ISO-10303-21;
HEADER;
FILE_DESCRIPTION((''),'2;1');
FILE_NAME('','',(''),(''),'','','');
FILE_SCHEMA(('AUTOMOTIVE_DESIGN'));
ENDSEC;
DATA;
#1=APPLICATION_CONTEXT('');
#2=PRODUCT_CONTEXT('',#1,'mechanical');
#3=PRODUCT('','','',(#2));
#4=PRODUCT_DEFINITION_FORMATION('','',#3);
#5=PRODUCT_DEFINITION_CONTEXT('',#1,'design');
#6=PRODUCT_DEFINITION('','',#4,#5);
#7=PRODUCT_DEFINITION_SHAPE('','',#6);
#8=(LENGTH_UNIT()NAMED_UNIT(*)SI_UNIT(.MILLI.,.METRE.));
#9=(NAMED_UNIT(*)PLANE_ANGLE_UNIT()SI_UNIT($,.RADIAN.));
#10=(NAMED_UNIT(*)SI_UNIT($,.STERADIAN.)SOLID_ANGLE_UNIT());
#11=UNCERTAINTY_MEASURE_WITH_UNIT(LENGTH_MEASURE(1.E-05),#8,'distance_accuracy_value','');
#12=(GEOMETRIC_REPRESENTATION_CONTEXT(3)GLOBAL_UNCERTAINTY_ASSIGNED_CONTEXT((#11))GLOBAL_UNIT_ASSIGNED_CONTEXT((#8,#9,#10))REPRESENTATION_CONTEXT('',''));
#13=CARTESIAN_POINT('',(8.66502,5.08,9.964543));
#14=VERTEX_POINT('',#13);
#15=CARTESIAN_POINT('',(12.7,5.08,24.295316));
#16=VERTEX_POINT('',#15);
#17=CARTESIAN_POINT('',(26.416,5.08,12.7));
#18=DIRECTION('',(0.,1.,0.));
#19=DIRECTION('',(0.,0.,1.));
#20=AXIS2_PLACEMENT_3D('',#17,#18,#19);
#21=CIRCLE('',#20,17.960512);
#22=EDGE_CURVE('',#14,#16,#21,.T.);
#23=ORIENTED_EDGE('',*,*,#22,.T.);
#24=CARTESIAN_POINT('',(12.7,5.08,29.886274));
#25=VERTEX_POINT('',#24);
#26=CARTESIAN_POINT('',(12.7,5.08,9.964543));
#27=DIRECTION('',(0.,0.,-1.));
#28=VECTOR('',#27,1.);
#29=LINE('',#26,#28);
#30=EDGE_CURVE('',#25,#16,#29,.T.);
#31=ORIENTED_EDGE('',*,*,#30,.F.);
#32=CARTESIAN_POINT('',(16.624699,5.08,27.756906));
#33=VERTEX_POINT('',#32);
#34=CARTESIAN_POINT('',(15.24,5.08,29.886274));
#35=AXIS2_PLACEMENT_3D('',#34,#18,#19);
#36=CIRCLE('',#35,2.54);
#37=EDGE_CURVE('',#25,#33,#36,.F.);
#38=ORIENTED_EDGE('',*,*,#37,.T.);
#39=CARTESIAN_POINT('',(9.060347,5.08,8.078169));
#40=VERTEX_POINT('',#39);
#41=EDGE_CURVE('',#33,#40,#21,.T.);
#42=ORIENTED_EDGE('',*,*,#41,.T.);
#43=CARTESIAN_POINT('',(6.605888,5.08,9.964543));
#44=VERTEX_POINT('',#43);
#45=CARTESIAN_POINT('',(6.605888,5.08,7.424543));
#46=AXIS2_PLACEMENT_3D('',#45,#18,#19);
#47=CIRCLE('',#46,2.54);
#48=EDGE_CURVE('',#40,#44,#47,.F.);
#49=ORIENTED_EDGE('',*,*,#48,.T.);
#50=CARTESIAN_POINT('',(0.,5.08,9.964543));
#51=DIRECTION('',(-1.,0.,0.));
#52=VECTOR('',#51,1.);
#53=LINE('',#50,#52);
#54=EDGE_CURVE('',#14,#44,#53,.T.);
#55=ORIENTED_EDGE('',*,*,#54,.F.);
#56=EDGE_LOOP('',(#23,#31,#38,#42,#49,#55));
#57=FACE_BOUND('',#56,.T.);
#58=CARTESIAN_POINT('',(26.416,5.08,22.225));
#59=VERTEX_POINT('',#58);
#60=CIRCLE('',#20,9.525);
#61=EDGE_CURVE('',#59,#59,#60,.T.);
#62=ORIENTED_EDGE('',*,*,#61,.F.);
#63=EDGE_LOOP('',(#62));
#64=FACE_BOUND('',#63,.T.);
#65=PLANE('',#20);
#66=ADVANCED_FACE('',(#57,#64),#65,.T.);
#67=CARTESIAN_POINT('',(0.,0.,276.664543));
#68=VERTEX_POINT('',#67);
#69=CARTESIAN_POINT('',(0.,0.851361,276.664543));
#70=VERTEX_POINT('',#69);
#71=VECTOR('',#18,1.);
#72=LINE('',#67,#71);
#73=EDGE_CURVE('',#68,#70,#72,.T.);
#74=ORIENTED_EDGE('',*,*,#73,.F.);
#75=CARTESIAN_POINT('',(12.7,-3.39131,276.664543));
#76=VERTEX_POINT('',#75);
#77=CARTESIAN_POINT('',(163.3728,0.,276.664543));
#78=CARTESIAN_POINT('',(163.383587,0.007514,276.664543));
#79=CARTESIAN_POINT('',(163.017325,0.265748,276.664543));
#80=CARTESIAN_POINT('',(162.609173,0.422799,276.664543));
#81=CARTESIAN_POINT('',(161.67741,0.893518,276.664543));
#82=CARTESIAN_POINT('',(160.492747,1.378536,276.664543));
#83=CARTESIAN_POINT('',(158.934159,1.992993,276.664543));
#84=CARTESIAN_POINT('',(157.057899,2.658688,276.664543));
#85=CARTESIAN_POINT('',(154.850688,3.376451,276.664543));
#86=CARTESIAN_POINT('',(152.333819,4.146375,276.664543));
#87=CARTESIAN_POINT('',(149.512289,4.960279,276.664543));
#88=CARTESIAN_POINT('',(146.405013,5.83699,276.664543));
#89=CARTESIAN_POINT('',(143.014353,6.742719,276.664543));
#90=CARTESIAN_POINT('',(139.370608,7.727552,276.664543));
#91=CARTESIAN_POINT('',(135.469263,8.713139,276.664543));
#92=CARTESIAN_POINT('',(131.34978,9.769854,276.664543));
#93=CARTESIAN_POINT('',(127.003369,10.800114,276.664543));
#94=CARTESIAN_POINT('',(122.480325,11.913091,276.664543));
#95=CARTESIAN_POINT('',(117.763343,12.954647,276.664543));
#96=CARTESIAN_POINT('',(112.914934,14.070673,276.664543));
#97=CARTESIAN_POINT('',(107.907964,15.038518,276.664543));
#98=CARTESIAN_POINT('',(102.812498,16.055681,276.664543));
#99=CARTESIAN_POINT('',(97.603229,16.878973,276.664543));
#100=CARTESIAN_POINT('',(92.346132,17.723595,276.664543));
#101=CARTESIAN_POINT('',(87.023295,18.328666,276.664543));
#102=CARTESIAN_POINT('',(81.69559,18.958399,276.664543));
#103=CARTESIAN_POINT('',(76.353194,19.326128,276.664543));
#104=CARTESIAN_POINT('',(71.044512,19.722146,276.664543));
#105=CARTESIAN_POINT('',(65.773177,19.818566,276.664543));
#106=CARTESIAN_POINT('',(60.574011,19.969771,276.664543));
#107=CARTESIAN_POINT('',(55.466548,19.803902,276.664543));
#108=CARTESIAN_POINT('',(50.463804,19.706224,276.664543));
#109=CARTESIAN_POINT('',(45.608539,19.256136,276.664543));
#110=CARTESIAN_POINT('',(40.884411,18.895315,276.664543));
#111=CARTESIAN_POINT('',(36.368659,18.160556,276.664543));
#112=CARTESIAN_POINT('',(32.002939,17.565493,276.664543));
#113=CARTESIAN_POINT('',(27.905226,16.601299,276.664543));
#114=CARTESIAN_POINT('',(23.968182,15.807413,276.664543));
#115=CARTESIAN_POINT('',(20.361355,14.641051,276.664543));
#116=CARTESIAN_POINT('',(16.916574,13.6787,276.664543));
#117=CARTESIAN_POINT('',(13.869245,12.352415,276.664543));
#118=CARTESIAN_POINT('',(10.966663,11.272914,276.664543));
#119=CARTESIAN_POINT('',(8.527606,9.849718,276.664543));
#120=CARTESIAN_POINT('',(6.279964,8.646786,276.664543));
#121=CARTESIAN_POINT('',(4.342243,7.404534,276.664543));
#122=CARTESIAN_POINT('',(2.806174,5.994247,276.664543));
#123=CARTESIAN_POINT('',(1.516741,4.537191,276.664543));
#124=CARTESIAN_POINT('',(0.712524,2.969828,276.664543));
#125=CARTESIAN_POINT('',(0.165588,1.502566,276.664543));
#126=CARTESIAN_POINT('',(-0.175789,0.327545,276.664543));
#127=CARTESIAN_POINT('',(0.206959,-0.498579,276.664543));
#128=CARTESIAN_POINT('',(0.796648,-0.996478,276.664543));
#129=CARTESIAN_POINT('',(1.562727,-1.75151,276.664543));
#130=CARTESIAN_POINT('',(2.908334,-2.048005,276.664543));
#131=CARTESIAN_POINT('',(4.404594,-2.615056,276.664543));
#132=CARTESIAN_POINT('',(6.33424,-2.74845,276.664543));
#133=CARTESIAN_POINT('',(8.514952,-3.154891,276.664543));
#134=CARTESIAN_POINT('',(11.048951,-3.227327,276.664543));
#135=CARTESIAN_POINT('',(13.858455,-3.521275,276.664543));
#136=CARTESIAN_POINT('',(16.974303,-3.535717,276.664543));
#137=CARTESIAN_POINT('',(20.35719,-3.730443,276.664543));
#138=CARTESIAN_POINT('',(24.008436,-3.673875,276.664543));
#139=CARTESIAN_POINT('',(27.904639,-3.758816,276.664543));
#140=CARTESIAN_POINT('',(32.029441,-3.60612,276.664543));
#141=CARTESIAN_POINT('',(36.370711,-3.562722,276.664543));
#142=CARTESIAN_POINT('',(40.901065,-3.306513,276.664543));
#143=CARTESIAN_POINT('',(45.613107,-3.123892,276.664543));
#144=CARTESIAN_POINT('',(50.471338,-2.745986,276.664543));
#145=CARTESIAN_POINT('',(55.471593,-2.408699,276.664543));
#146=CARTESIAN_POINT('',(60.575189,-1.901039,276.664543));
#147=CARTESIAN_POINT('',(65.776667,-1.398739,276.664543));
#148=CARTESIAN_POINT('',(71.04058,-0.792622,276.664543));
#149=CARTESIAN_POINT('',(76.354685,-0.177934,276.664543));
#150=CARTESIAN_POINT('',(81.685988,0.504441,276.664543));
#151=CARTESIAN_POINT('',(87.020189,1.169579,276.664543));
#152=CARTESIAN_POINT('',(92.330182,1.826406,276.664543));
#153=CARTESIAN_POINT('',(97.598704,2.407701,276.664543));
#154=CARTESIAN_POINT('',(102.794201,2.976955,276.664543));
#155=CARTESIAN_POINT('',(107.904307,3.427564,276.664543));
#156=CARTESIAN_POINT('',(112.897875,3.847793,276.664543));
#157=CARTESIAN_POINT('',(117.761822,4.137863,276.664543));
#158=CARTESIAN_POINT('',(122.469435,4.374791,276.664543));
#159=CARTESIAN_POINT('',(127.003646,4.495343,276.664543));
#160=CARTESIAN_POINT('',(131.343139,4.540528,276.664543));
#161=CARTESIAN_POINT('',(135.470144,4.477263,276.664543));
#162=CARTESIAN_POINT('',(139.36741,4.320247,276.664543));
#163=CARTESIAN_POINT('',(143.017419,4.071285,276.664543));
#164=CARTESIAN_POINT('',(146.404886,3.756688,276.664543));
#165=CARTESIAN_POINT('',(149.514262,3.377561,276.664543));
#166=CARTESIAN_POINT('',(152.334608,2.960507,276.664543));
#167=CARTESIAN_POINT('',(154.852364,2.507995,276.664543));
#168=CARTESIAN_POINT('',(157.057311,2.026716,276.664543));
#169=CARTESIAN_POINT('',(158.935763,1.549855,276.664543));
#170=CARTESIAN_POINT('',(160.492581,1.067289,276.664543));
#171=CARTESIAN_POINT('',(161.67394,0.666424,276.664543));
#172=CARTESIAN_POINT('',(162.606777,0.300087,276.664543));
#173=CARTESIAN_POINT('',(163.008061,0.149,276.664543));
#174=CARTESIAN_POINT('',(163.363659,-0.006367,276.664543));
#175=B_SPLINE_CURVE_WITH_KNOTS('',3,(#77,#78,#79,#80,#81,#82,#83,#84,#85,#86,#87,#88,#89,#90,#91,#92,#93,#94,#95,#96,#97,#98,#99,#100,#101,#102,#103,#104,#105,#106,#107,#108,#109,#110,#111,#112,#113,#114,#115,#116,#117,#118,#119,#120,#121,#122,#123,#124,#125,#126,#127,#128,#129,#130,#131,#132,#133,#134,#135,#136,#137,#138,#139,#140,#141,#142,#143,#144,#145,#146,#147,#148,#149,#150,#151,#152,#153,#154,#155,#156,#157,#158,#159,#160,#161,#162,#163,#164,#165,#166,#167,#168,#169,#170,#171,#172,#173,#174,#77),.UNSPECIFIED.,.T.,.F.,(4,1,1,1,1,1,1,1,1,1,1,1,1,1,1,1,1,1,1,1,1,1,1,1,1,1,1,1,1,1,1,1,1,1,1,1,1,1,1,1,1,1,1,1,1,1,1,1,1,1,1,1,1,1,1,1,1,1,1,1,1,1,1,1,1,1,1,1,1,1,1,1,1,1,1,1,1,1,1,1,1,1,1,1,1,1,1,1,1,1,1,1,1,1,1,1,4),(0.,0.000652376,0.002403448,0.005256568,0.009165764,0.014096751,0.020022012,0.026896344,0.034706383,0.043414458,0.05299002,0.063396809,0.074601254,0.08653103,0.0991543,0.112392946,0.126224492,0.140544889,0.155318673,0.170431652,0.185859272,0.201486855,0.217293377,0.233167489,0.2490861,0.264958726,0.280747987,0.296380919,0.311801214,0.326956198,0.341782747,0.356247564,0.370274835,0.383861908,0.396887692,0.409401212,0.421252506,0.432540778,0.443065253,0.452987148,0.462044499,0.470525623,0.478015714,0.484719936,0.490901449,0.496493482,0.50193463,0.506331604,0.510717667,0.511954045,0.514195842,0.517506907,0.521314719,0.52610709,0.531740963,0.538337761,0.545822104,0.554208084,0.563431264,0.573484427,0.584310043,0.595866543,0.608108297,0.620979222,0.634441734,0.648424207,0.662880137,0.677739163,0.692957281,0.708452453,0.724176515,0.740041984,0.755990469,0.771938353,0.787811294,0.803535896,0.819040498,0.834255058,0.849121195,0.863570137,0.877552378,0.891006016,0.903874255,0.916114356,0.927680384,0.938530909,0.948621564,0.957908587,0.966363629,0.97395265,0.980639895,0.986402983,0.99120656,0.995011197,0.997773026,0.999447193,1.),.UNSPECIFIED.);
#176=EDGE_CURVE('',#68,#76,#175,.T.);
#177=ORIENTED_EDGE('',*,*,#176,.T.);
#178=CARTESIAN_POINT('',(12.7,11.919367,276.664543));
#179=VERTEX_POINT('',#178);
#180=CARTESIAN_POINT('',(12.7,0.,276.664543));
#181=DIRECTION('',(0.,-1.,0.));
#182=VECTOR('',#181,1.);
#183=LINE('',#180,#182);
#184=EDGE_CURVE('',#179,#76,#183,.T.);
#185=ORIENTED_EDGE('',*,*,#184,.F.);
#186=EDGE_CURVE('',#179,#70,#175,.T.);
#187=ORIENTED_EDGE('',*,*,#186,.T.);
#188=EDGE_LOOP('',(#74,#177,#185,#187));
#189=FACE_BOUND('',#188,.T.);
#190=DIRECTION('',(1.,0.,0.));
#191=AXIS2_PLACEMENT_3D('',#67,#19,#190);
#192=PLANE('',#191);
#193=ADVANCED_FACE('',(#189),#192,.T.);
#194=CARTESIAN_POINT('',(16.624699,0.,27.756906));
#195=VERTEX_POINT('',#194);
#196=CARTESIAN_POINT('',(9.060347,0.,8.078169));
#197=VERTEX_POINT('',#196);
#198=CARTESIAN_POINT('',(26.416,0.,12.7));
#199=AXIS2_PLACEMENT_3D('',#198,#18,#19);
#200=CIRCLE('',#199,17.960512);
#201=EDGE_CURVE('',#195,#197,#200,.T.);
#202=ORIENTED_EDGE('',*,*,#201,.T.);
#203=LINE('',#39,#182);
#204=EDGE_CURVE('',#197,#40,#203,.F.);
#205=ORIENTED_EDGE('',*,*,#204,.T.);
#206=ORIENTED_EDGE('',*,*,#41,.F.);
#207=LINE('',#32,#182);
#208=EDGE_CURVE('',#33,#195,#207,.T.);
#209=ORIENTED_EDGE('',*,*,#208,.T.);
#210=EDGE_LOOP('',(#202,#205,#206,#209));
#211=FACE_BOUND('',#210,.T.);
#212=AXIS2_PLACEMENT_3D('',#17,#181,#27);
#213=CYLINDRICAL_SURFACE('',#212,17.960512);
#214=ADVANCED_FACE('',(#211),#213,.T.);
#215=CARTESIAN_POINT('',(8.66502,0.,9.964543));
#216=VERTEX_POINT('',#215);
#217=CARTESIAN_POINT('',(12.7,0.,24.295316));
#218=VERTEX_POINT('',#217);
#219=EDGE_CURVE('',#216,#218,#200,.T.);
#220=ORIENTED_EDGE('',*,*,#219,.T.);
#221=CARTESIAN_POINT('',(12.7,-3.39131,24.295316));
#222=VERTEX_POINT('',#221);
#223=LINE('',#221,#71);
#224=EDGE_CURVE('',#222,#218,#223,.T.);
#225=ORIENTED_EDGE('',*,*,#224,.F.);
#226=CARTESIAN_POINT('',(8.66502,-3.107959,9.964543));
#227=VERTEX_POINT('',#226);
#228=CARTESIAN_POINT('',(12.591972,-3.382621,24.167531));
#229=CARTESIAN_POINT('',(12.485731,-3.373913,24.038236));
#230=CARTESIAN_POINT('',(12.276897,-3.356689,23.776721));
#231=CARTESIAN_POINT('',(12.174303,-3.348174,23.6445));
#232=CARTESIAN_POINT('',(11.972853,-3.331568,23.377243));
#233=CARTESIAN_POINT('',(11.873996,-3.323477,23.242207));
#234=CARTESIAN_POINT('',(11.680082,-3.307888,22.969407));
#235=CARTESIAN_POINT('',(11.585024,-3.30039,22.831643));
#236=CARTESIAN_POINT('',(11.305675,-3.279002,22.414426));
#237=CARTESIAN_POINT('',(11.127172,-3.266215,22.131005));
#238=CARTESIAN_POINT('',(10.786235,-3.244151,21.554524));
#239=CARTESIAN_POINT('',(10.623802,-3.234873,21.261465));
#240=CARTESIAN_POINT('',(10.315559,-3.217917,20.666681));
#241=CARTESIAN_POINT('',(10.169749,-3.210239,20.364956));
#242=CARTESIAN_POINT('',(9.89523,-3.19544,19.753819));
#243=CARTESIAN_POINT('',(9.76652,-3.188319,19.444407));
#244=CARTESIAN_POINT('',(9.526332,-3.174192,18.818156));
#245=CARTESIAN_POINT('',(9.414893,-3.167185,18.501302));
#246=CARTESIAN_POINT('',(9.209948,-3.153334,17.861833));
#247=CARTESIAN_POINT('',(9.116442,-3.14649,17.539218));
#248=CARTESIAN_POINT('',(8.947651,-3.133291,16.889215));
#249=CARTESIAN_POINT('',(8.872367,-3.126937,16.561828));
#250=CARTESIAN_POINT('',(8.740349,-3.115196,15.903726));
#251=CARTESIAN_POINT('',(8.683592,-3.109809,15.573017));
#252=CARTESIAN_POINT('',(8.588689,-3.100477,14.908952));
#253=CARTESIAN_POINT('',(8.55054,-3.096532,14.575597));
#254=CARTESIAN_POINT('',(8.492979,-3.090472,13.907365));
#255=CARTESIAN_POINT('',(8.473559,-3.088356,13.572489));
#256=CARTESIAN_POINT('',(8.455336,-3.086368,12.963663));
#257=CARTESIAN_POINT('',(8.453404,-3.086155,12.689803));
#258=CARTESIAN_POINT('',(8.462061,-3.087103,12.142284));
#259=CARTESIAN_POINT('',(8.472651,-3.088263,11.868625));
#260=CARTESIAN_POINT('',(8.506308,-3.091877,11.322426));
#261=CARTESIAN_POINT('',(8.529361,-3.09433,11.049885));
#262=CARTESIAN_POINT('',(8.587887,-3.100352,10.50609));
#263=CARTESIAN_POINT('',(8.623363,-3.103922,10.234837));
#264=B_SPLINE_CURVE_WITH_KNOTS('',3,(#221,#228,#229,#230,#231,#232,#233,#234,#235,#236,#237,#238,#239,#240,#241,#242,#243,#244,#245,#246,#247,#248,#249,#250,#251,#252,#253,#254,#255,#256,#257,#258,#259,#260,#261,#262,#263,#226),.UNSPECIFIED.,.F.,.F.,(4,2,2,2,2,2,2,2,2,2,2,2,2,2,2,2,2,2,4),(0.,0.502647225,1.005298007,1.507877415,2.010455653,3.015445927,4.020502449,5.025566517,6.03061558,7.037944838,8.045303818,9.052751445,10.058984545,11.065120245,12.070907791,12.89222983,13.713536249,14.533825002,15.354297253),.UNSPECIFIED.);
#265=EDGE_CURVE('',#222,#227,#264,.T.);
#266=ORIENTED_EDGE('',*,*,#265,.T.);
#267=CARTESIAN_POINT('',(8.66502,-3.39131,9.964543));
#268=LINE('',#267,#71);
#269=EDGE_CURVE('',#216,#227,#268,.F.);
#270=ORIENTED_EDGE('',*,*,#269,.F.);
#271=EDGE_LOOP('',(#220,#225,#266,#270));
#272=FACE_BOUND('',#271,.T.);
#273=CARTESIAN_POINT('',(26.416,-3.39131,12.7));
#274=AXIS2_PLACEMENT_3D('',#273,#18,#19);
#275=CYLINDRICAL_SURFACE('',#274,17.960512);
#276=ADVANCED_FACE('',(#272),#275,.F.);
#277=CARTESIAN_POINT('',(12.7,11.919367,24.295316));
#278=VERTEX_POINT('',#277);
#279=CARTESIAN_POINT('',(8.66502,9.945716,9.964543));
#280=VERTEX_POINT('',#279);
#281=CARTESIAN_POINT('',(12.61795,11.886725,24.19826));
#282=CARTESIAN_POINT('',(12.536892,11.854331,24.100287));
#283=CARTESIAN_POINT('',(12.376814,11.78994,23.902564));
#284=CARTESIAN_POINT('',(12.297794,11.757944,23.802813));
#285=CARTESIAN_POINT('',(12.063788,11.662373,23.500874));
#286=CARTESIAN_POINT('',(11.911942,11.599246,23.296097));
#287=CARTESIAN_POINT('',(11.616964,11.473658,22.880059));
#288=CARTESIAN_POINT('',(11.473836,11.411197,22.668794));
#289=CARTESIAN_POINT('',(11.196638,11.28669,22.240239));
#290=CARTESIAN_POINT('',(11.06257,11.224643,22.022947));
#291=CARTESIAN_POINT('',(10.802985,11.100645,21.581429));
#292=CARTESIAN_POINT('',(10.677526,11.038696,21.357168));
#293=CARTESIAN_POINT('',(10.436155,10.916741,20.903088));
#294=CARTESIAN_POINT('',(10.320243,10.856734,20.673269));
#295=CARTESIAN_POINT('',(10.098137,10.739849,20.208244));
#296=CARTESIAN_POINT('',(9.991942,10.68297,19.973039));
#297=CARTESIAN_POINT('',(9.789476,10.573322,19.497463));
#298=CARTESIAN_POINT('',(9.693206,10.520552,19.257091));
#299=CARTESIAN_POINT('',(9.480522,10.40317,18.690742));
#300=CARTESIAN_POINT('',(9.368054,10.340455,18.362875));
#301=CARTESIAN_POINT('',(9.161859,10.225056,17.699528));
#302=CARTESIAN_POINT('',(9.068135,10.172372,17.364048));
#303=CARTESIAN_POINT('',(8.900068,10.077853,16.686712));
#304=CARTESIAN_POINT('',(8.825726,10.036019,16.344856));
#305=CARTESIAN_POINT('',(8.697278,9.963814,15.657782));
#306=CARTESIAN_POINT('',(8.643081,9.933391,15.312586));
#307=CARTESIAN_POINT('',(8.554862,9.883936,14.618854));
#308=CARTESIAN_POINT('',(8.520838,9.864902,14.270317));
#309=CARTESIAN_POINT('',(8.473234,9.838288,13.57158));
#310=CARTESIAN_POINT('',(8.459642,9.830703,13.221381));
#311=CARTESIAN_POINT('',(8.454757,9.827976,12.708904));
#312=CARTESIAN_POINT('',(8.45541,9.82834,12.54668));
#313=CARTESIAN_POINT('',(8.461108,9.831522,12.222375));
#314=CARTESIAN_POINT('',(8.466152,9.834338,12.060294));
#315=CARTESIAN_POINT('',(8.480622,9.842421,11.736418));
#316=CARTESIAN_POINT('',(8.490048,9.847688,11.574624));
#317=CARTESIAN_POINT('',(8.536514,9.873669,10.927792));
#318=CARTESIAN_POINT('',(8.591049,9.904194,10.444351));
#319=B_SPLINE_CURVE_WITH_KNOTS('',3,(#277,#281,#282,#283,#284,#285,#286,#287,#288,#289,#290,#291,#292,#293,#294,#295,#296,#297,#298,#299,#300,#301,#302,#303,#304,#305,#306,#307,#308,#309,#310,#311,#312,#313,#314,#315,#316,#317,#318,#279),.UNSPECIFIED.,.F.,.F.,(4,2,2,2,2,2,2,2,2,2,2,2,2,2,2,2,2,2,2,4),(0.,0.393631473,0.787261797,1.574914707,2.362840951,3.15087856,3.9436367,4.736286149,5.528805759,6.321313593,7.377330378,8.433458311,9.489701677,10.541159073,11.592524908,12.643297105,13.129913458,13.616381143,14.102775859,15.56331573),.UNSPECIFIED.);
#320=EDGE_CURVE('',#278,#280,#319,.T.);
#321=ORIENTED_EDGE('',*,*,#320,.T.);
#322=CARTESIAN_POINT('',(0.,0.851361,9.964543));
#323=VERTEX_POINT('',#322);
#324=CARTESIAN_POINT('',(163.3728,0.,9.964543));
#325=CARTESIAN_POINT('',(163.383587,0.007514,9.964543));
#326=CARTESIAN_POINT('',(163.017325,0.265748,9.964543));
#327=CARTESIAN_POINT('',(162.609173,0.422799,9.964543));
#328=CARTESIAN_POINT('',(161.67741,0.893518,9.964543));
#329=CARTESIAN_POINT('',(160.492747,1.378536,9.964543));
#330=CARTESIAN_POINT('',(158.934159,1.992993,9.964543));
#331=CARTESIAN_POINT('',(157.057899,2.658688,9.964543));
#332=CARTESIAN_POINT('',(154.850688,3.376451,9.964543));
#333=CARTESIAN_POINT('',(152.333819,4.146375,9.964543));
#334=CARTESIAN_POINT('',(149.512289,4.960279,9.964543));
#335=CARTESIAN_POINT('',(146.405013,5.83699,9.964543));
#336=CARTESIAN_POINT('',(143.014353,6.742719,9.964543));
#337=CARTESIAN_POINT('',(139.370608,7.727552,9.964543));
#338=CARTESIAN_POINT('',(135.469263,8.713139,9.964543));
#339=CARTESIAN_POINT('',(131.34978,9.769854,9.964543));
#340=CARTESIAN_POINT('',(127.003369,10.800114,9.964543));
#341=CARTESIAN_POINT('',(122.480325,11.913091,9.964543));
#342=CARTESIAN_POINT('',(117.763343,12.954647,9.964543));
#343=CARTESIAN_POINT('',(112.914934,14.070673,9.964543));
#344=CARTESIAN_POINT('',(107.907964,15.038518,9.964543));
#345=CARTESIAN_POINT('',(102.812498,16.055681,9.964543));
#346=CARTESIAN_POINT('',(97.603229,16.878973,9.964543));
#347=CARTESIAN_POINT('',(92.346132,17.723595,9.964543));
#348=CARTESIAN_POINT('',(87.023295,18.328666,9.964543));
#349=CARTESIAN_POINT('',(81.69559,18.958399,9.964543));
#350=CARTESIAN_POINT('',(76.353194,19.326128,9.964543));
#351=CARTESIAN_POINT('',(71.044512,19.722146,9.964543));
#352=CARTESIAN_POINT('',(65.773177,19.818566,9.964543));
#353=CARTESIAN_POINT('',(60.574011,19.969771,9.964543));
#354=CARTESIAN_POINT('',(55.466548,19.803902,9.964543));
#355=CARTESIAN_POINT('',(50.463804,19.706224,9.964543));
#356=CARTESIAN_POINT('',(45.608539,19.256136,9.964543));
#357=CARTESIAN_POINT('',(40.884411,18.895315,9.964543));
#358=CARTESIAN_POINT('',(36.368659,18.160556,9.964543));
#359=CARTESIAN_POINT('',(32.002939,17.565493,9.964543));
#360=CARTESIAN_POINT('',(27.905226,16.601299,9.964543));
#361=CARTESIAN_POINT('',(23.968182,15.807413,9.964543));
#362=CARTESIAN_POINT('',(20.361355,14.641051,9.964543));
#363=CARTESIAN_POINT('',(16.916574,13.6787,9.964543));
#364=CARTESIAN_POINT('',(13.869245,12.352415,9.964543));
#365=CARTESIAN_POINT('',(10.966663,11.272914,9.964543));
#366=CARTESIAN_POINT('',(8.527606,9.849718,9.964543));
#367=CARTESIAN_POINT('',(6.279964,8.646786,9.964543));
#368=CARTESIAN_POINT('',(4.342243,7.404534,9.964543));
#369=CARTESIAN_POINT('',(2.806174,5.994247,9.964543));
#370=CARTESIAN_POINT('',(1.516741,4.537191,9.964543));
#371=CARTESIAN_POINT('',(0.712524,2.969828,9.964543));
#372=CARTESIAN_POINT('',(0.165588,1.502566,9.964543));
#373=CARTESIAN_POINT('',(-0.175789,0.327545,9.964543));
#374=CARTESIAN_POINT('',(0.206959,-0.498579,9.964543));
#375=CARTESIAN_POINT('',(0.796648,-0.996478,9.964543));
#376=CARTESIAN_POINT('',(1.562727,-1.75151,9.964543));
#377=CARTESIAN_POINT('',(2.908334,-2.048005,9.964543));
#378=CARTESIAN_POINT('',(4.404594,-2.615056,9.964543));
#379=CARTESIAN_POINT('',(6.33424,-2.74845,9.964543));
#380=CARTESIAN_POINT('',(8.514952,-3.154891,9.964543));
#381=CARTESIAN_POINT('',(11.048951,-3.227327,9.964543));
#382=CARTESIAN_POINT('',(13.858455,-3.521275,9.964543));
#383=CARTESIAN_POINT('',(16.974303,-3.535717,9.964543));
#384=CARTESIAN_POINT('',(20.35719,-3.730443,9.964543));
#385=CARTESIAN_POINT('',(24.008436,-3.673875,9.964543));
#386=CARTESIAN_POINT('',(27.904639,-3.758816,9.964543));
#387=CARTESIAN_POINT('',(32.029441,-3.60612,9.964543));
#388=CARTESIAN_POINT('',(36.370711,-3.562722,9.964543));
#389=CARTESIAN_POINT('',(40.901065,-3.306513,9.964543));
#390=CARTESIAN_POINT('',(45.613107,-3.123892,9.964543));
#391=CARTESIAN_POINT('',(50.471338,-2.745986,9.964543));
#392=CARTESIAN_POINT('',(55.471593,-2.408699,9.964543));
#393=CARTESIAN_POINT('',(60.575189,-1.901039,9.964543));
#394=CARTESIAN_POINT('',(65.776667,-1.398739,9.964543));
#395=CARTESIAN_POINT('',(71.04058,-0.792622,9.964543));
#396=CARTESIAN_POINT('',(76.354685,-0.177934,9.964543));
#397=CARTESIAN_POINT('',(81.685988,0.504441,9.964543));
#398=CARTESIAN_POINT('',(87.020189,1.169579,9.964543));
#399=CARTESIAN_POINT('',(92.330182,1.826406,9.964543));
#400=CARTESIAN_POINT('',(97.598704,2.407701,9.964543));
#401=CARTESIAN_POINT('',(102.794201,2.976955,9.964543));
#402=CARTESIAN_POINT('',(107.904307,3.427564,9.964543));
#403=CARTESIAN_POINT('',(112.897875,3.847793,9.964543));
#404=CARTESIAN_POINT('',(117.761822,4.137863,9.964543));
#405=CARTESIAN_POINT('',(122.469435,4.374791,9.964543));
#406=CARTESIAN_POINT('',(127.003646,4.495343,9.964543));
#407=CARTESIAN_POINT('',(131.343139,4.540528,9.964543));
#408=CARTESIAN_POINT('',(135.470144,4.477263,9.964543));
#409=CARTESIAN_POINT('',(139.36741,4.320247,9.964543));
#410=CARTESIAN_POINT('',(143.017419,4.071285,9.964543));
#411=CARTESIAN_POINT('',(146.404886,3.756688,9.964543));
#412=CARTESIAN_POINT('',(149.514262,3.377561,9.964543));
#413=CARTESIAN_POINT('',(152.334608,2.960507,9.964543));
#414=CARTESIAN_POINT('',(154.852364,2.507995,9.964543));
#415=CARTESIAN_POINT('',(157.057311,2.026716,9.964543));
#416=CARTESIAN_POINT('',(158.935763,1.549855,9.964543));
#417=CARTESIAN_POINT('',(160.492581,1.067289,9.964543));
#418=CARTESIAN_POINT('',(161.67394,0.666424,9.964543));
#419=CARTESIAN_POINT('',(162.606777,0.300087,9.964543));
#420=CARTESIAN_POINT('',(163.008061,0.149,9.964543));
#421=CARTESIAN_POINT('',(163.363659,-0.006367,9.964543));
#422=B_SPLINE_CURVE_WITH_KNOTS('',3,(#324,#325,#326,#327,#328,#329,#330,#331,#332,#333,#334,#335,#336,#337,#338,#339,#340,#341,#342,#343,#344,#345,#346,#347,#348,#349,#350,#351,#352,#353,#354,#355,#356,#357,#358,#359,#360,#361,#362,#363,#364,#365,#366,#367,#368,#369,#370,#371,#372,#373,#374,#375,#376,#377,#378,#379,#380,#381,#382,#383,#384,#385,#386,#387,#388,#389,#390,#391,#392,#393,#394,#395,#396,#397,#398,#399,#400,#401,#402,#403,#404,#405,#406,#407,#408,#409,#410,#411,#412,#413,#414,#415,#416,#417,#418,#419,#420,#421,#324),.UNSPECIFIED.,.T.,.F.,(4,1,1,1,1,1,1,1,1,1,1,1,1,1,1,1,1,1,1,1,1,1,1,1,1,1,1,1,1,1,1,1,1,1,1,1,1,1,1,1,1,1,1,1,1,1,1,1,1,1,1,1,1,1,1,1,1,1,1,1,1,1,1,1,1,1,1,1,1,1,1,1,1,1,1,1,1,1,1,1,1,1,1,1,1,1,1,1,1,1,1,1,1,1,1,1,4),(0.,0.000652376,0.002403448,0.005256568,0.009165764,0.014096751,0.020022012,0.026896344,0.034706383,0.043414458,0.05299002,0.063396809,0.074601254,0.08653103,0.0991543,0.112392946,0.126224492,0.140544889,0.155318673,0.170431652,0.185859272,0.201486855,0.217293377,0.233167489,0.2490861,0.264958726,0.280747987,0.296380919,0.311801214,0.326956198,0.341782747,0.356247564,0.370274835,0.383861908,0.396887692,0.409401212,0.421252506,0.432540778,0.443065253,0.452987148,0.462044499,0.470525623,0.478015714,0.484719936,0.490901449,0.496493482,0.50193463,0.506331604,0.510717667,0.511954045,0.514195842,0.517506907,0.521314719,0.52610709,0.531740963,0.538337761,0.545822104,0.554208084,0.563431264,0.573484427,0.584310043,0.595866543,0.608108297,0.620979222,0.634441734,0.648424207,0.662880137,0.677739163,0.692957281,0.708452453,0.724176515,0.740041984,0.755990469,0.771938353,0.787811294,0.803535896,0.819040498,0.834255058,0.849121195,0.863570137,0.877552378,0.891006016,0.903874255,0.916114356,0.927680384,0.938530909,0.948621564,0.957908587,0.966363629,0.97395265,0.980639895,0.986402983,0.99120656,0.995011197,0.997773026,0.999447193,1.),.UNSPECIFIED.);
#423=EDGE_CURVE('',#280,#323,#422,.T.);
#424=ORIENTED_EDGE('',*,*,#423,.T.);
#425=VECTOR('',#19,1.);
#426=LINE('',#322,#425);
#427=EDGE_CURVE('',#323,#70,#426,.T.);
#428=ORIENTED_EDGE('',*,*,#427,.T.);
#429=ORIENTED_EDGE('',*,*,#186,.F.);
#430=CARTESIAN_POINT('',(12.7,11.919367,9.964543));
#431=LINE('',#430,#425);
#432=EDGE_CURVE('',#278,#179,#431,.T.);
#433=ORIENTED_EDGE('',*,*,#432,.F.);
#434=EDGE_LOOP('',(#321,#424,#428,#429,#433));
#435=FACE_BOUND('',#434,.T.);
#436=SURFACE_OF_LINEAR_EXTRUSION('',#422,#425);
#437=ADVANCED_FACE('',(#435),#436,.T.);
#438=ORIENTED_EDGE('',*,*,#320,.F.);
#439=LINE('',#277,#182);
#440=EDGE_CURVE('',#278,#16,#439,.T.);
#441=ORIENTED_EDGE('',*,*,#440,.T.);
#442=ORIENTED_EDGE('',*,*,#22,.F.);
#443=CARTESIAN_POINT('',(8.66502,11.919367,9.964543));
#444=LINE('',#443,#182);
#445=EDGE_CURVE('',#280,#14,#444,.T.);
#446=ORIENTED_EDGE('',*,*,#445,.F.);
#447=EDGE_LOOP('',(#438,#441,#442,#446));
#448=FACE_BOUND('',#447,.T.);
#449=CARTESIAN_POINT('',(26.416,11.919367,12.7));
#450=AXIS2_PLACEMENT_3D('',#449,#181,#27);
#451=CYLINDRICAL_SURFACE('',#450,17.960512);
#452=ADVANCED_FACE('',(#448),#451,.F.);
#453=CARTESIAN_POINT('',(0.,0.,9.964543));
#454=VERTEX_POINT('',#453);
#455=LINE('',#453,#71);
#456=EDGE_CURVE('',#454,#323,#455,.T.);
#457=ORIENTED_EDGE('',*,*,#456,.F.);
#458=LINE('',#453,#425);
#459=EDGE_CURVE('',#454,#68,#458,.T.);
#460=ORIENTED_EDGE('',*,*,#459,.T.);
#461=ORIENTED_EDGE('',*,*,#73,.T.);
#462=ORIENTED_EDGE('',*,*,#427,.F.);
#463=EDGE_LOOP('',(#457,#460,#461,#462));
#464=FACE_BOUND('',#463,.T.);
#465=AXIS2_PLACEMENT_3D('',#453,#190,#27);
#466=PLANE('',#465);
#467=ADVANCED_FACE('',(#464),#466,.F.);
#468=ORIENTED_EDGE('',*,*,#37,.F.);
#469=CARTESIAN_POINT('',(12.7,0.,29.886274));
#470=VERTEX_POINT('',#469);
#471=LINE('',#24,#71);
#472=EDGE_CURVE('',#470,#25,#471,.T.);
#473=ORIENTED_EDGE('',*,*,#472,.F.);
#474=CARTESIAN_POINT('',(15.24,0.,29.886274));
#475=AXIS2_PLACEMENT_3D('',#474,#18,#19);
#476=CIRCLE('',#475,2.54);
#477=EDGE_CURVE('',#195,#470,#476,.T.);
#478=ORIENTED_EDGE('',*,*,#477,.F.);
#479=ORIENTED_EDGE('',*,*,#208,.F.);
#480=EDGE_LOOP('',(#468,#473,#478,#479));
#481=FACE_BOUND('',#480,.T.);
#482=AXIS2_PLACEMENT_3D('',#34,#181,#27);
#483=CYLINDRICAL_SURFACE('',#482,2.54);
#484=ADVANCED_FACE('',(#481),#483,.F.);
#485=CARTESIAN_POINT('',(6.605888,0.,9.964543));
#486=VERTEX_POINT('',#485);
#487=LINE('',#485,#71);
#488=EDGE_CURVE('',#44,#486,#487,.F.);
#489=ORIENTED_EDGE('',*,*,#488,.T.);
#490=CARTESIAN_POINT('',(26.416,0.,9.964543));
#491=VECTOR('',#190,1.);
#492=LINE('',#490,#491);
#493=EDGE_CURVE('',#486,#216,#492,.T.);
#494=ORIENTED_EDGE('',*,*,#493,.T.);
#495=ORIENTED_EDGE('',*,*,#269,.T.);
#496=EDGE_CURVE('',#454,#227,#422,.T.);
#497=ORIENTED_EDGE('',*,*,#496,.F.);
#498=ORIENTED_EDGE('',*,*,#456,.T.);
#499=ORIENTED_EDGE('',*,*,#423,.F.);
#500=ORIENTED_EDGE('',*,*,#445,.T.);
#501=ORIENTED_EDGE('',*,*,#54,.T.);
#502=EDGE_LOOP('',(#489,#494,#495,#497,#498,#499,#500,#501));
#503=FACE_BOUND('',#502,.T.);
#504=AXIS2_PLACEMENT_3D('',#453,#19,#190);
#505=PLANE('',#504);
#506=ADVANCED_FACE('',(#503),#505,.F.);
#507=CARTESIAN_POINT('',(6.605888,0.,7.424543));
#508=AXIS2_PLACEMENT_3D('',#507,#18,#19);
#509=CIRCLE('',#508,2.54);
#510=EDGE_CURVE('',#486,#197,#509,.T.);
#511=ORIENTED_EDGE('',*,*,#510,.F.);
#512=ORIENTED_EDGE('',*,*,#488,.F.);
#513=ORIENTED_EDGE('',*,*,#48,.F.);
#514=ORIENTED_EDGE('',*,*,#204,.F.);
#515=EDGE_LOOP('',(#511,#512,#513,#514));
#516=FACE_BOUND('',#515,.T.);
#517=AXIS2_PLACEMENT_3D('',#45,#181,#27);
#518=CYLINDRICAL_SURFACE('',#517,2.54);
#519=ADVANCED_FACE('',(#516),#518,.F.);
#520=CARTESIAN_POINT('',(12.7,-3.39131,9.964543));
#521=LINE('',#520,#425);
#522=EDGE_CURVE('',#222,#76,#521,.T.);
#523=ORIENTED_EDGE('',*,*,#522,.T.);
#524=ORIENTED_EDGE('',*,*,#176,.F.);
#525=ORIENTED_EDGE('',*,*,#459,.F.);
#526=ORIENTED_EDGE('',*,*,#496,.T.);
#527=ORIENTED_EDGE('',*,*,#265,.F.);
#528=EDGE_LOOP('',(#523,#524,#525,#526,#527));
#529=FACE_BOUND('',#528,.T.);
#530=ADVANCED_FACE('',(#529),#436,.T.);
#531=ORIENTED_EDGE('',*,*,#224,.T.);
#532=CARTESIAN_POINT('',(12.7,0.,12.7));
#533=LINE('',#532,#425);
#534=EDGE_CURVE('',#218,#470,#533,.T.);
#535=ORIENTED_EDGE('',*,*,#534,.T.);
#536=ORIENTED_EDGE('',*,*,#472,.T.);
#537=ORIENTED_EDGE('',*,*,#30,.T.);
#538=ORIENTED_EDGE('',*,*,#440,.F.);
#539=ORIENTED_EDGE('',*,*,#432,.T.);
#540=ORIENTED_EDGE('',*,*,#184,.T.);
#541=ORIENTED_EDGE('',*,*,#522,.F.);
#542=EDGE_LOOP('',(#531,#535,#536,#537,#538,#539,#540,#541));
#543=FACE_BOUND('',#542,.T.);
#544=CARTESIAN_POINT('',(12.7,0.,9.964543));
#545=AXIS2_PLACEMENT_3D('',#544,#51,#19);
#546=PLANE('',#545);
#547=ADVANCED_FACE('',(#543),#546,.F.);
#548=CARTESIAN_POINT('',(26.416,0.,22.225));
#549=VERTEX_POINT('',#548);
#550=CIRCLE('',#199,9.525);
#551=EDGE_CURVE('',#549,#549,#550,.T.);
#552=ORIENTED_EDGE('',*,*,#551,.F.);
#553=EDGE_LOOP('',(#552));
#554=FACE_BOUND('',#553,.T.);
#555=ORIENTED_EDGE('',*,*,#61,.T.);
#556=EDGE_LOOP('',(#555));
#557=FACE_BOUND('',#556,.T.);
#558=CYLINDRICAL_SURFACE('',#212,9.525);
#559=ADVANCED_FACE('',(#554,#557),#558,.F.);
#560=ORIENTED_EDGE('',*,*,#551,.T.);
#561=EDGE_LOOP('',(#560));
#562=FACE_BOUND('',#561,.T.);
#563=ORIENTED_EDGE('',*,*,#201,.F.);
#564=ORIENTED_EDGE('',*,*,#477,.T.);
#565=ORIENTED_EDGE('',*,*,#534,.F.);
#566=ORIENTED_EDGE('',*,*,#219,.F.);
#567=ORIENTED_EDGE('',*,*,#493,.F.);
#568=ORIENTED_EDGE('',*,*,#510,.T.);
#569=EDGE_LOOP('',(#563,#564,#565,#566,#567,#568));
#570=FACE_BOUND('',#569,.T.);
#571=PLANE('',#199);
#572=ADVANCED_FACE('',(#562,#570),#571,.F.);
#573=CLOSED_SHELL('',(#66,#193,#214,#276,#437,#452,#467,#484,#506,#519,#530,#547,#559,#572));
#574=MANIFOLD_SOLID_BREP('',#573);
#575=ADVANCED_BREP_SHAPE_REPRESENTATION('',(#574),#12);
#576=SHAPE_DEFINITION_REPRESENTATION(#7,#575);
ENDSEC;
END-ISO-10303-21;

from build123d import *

# Parameters (mm, degrees)
STOCK_AIRFOIL_START                         = 9.964543073
STOCK_AIRFOIL_SWEPT_WING_FX63137_IL_1_DEPTH = 266.7
SKETCH1_R                                   = 17.960512242
SKETCH1_R_2                                 = 9.525
BOSS_EXTRUDE1_DEPTH                         = 5.08
SKETCH1_2_R                                 = 17.960512242
SKETCH1_2_R_2                               = 9.525
CUT_EXTRUDE1_DEPTH                          = 281.454302176
CUT_EXTRUDE2_DEPTH                          = 281.328927111
FILLET1_R                                   = 2.54


# Read off the part's stored shape, not the designer's step: Stock-Airfoil swept wing fx63137-il-1
with BuildPart() as part:
    # Stock-Airfoil swept wing fx63137-il-1 ou → Stock-Airfoil swept wing fx63137-il-1 (new body)
    with BuildSketch(Plane.XY.offset(STOCK_AIRFOIL_START)):
        with BuildLine():
            Line((12.7, -3.391309563), (12.7, 11.919367389))
            add(Edge.make_bspline(
                [(12.7, 11.919367389), (12.107688094, 11.683702249), (10.635574453, 11.079722892), (8.527606142, 9.849717648), (6.279964378, 8.646785603), (4.342242589, 7.40453424), (2.806173618, 5.994247444), (1.516740911, 4.537191471), (0.712524386, 2.969827744), (0.263531395, 1.765317826), (0.043146734, 1.059554456), (1.8e-08, 0.851361022)],
                knots=[0.45638464, 0.45638464, 0.45638464, 0.45638464, 0.462044499, 0.470525623, 0.478015714, 0.484719936, 0.490901449, 0.496493482, 0.50193463, 0.506331604, 0.508170451, 0.508170451, 0.508170451, 0.508170451], degree=3))
            Line((1.8e-08, 0.851361022), (0, 0))
            add(Edge.make_bspline(
                [(0, 0), (0.037678235, -0.133203376), (0.20695929, -0.498579461), (0.796648481, -0.996478044), (1.562726639, -1.751510363), (2.908334343, -2.048005045), (4.404594059, -2.615055976), (6.334240311, -2.748450405), (8.514951674, -3.154891292), (10.691274683, -3.217102669), (12.115175856, -3.344316823), (12.7, -3.391309563)],
                knots=[0.510717667, 0.510717667, 0.510717667, 0.510717667, 0.511954045, 0.514195842, 0.517506907, 0.521314719, 0.52610709, 0.531740963, 0.538337761, 0.545822104, 0.551036832, 0.551036832, 0.551036832, 0.551036832], degree=3))
        make_face()
    extrude(amount=STOCK_AIRFOIL_SWEPT_WING_FX63137_IL_1_DEPTH)

    # Sketch1 → Boss-Extrude1 (add)
    with BuildSketch(Plane(origin=(0, 0, 0), x_dir=(1, 0, 0), z_dir=(0, 1, 0))):
        with Locations((26.416, -12.7)):
            Circle(SKETCH1_R)
        with Locations(Location((26.416, -12.7, 0), (0, 0, 270))):
            Circle(SKETCH1_R_2, mode=Mode.SUBTRACT)
    extrude(amount=BOSS_EXTRUDE1_DEPTH)

    # Sketch1<2> → Cut-Extrude1 (cut, through all)
    with BuildSketch(Plane(origin=(0, 0, 0), x_dir=(1, 0, 0), z_dir=(0, 1, 0))):
        with Locations((26.416, -12.7)):
            Circle(SKETCH1_2_R)
        with Locations(Location((26.416, -12.7, 0), (0, 0, 270))):
            Circle(SKETCH1_2_R_2, mode=Mode.SUBTRACT)
    extrude(amount=-CUT_EXTRUDE1_DEPTH, mode=Mode.SUBTRACT)

    # Sketch2 → Cut-Extrude2 (cut, through all)
    with BuildSketch(Plane(origin=(0, 5.08, 0), x_dir=(1, 0, 0), z_dir=(0, 1, 0))):
        with BuildLine():
            Line((12.7, -24.295315606), (12.7, -9.964543073))
            Line((12.7, -9.964543073), (8.665020438, -9.964543073))
            ThreePointArc((8.665020438, -9.964543073), (9.127695831, -17.567703665), (12.7, -24.295315606))
        make_face()
    extrude(amount=CUT_EXTRUDE2_DEPTH, mode=Mode.SUBTRACT)

    # Fillet1
    fillet1_edges = [part.edges().sort_by_distance(p)[0] for p in [
        (8.665020438, 2.54, 9.964543073),
        (12.7, 2.54, 24.295315606),
    ]]
    fillet(fillet1_edges, radius=FILLET1_R)


solid = part.part
